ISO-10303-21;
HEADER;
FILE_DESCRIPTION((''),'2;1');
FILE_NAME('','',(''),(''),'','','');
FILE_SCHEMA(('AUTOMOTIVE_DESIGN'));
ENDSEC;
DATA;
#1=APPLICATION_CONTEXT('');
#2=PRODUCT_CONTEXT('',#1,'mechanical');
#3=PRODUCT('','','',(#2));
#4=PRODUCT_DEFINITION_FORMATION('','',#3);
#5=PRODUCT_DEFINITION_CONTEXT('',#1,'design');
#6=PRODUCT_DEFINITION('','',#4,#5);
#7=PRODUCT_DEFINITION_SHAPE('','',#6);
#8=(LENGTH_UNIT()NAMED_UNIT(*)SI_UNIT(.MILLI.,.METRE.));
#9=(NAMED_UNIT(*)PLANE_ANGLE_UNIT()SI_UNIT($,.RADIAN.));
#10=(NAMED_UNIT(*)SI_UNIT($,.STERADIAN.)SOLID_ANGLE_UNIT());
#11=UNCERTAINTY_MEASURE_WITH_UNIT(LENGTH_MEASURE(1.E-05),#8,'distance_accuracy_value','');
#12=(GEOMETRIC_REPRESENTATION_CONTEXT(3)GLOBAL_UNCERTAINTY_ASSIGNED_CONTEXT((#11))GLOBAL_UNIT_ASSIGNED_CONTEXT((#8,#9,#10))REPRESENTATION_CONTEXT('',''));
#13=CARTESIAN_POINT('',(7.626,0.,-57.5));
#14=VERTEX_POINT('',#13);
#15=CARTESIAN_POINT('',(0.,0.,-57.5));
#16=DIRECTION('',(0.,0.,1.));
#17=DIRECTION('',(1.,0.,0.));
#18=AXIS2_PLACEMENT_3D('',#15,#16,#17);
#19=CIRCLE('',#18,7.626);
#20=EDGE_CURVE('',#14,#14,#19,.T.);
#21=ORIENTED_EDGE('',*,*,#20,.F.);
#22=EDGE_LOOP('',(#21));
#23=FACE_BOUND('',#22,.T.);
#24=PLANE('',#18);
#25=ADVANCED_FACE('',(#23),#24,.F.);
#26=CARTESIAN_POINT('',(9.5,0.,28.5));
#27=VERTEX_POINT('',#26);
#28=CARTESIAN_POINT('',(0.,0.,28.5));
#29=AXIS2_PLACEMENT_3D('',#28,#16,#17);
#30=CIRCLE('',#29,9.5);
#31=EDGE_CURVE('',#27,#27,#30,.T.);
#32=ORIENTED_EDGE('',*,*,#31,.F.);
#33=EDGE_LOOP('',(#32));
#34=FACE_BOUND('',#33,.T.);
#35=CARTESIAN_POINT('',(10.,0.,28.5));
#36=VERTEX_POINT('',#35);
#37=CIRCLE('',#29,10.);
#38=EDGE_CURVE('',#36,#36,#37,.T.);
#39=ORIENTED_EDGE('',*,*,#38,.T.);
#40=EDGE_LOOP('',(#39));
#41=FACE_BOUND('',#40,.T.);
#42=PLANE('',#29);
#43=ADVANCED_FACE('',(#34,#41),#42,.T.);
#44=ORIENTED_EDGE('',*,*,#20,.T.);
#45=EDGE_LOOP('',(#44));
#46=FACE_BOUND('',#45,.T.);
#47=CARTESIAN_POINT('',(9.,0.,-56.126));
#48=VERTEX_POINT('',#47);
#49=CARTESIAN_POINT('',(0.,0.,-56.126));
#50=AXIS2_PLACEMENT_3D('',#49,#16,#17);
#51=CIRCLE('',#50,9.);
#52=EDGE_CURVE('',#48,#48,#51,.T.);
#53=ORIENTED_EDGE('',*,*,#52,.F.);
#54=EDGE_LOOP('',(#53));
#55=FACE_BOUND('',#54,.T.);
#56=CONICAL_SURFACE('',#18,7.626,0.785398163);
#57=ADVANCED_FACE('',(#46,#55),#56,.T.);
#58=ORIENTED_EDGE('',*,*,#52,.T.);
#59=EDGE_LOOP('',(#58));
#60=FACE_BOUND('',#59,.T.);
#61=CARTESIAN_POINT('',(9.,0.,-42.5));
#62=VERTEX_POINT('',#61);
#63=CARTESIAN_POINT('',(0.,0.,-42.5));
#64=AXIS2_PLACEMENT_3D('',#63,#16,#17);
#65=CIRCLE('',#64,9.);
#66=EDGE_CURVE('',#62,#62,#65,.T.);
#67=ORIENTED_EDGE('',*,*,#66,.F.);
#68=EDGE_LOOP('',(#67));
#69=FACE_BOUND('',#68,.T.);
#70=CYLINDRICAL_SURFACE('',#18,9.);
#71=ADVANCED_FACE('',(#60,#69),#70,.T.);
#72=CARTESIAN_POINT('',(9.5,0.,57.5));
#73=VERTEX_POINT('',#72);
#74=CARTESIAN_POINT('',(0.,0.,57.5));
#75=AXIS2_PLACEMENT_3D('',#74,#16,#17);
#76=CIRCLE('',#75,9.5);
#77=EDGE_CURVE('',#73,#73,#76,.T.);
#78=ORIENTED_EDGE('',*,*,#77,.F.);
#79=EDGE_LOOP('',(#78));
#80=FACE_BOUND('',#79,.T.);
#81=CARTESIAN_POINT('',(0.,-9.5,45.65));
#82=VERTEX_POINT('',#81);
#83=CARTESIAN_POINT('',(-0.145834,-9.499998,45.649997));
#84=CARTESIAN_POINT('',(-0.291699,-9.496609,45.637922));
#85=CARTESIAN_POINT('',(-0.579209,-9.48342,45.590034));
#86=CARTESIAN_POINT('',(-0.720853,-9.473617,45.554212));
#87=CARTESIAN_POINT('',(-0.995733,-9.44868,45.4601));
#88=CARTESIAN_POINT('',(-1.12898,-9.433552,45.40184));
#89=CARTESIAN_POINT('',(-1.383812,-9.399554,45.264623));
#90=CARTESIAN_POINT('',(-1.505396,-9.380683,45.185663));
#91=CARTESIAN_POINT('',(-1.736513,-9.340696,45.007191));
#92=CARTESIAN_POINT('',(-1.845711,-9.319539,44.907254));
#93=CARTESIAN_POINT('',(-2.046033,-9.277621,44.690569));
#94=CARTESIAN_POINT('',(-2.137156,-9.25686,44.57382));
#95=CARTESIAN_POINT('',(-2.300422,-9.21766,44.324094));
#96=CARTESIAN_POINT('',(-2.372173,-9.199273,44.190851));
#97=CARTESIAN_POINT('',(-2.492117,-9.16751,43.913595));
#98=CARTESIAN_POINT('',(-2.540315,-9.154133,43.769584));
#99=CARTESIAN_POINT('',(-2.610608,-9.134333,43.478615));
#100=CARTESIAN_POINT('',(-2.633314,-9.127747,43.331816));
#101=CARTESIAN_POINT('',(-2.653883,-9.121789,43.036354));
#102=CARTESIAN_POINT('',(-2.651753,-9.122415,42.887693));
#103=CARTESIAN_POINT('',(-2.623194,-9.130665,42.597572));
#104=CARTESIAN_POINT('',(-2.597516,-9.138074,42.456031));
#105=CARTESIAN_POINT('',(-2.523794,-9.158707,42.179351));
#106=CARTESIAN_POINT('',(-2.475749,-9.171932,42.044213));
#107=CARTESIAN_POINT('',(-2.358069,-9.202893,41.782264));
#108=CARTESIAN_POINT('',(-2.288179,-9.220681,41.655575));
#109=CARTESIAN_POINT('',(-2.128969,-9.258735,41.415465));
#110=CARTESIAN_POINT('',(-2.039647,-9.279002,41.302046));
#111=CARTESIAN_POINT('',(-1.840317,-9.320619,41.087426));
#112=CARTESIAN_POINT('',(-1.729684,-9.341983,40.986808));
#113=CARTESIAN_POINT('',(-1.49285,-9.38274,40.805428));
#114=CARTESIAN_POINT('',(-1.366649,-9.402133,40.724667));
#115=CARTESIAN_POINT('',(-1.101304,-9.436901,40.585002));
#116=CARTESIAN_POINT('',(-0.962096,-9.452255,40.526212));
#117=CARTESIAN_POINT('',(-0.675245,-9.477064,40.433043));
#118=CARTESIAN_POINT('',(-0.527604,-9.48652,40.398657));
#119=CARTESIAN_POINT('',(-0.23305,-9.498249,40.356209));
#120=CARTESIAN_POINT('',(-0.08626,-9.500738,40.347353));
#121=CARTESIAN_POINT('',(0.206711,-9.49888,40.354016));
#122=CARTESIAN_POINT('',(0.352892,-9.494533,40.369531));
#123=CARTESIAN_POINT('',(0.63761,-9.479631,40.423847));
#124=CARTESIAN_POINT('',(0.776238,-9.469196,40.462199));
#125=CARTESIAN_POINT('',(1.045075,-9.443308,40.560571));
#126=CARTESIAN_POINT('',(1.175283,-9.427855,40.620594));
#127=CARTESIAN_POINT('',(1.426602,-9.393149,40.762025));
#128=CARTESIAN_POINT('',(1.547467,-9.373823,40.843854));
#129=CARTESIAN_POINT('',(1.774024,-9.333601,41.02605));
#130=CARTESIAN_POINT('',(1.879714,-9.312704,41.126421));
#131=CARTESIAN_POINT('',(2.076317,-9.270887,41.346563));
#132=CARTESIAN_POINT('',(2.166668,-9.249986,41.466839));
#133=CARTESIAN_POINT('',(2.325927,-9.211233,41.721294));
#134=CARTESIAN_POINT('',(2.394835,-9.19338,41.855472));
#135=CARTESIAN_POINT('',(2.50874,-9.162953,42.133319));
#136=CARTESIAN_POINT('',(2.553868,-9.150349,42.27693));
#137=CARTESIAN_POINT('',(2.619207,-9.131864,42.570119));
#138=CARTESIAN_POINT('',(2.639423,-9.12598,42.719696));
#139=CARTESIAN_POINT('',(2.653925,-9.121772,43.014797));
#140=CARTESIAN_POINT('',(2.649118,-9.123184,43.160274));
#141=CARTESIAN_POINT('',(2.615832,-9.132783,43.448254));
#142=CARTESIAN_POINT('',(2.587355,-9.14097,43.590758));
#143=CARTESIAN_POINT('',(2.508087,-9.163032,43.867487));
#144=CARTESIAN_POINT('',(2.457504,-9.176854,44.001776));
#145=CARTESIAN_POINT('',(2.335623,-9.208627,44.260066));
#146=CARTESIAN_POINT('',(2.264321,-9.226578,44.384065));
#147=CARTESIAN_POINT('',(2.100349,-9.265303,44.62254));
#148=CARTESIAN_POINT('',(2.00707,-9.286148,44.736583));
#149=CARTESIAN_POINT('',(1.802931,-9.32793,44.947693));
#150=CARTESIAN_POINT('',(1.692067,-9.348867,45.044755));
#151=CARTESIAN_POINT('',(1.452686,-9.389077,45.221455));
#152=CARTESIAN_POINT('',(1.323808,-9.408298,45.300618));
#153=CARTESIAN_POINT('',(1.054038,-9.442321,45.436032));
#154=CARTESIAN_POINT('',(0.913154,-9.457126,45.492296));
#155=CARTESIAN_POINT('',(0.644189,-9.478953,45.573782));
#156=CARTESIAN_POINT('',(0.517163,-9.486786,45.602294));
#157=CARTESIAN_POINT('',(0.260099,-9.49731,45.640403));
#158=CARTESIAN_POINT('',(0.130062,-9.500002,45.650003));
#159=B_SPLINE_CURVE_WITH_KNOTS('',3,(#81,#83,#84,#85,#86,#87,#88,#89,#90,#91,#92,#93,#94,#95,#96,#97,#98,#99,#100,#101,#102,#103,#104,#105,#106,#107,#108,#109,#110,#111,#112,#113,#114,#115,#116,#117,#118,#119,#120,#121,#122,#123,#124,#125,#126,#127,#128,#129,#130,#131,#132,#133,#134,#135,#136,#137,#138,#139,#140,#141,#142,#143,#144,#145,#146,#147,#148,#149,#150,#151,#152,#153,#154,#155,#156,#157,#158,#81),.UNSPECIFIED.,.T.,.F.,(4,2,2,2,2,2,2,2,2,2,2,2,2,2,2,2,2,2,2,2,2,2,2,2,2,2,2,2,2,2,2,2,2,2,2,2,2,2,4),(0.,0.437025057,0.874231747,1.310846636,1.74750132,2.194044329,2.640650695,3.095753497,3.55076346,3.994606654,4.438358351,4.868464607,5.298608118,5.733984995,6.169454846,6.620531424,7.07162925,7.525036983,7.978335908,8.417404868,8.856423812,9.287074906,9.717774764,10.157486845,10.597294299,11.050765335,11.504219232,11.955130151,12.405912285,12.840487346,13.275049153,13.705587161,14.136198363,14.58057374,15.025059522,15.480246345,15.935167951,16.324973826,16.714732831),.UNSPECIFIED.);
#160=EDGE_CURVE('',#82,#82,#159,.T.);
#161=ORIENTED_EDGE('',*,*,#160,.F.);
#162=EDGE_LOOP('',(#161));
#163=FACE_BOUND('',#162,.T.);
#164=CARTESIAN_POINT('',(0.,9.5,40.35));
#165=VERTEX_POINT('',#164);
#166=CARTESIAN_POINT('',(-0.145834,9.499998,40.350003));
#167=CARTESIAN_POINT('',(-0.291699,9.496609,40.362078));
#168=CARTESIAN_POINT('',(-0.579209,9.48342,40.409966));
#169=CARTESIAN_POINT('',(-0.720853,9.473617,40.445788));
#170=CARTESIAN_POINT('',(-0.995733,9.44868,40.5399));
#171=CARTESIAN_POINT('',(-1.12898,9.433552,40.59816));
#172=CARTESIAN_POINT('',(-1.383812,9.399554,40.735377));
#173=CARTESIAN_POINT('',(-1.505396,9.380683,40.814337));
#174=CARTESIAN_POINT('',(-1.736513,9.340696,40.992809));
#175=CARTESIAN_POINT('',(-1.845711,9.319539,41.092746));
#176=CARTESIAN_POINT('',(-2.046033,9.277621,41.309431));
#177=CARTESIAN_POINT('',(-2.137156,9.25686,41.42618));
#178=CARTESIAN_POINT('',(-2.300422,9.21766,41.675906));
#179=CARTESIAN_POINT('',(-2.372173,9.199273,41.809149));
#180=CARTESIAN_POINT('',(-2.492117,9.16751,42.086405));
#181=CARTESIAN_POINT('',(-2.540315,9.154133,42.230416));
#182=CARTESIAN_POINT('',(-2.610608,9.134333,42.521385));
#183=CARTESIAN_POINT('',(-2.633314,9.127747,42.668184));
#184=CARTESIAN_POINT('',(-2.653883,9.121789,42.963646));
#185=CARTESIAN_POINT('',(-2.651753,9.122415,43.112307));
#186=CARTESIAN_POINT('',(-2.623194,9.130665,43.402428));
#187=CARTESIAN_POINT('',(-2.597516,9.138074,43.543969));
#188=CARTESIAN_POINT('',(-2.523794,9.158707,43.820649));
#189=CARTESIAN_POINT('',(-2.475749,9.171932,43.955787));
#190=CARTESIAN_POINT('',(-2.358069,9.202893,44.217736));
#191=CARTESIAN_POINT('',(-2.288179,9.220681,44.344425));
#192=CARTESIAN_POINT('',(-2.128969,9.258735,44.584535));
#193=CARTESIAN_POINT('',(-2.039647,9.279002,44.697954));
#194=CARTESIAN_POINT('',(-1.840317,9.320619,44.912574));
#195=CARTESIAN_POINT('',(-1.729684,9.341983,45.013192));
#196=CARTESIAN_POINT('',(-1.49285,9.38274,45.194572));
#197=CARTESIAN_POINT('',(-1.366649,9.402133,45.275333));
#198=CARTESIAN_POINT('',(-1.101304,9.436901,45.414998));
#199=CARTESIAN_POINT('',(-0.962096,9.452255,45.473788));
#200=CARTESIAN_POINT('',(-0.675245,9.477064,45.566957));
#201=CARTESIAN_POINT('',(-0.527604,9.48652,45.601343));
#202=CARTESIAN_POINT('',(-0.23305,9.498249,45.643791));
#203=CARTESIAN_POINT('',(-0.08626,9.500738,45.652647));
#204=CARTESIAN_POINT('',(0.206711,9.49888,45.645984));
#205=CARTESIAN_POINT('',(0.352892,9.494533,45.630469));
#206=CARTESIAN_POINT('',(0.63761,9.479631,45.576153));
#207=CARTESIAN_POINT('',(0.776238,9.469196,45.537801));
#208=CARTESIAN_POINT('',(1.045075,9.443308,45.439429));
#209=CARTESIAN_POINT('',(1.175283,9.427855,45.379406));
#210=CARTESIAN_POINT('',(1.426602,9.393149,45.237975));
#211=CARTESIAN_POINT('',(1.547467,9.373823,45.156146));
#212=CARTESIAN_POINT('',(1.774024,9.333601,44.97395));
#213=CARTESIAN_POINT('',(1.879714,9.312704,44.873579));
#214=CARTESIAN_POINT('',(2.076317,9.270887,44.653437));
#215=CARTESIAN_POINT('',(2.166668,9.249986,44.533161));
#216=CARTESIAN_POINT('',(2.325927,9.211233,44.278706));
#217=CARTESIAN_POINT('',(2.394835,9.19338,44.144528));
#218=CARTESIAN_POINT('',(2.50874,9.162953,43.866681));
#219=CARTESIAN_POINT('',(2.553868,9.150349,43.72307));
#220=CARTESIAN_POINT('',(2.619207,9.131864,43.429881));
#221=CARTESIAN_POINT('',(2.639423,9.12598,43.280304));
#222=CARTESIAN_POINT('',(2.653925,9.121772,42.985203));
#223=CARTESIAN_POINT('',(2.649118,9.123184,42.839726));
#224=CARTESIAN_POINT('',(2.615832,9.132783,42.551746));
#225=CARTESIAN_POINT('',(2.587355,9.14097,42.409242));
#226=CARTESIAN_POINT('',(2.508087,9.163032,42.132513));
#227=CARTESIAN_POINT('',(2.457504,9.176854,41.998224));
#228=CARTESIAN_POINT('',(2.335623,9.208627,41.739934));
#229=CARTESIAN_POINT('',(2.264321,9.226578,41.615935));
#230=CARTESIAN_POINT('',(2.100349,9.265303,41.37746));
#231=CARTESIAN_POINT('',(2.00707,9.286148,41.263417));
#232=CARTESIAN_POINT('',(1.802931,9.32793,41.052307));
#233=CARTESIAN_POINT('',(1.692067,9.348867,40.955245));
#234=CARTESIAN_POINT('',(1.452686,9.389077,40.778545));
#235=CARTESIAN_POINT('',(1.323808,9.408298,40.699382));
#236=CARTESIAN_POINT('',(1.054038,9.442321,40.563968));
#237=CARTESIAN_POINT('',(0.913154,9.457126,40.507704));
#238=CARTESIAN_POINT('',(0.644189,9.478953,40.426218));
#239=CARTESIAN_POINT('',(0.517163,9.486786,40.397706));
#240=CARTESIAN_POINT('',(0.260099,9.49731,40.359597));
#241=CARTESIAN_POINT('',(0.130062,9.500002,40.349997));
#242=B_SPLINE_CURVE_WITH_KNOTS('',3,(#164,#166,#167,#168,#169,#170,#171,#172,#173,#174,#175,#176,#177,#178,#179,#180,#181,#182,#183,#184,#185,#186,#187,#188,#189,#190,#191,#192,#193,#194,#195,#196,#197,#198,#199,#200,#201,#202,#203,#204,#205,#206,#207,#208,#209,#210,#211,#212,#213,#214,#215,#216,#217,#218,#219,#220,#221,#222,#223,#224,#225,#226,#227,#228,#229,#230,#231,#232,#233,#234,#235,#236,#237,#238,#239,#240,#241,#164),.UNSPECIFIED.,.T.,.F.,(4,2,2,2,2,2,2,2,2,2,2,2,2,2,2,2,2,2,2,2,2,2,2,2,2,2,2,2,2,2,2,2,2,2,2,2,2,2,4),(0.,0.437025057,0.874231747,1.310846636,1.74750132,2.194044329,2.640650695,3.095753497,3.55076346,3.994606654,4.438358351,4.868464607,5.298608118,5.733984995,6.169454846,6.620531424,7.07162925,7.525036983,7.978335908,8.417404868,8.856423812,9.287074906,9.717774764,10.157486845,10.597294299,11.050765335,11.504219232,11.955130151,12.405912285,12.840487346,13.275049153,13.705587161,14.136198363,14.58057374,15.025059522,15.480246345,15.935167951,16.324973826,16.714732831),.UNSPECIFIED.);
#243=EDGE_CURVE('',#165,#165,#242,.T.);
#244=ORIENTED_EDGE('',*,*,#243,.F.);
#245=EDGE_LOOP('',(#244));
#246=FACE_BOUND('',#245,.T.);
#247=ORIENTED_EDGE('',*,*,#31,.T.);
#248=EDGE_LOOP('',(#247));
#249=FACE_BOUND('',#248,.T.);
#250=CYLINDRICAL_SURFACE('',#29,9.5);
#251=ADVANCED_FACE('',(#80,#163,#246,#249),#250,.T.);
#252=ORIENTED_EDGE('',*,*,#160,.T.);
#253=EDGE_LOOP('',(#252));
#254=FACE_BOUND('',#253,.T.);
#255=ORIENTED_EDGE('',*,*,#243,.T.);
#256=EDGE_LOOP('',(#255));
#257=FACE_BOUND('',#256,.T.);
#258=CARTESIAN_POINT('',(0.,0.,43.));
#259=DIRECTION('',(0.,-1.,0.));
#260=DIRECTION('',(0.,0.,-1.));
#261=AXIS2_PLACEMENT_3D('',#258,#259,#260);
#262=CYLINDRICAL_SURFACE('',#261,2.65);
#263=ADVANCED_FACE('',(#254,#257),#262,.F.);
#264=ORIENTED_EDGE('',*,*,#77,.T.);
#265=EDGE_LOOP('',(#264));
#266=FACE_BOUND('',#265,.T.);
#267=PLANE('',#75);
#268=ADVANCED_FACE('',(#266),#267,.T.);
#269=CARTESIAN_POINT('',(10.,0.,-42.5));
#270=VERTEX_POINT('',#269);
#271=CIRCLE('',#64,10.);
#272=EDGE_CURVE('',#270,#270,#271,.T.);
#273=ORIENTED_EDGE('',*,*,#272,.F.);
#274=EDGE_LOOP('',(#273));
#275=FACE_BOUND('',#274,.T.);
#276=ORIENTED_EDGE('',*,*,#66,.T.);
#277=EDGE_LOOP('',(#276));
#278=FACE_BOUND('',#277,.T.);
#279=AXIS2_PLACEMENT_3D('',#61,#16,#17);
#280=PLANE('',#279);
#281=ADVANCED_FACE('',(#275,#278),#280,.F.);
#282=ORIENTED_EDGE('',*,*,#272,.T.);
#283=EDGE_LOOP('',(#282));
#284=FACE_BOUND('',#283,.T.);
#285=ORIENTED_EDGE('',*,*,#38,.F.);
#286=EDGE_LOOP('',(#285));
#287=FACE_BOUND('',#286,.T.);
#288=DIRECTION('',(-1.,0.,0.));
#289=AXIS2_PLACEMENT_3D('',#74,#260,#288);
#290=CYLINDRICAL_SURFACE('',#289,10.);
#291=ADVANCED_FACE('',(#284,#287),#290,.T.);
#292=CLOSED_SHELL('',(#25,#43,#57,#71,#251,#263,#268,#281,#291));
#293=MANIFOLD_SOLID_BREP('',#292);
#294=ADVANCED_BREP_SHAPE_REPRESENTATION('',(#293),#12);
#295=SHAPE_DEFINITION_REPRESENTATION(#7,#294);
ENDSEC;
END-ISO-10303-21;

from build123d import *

# Parameters (mm, degrees)
SKETCH1_R           = 10
BOSS_EXTRUDE1_DEPTH = 57.5
SKETCH7_R           = 10
SKETCH7_R_2         = 9.5
CUT_EXTRUDE1_DEPTH  = 29
SKETCH10_W          = 2.65
SKETCH10_H          = 10


# Read off the part's stored shape, not the designer's step: M18x2.5 Machine Threads Stud1
with BuildPart() as part:
    # Sketch1 → Boss-Extrude1 (new, symmetric)
    with BuildSketch(Plane.XY):
        Circle(SKETCH1_R)
    extrude(amount=BOSS_EXTRUDE1_DEPTH, both=True)

    # M18x2.5 Machine Threads Stud1 outline → M18x2.5 Machine Threads Stud1 (revolve, cut)
    with BuildSketch(Plane.XZ):
        Polygon((7.626, -57.5), (10, -57.5), (10, -42.5), (9, -42.5), (9, -56.126), align=None)
    revolve(axis=Axis((0, 0, 0), (0, 0, 1)), mode=Mode.SUBTRACT)

    # Sketch7 → Cut-Extrude1 (cut)
    with BuildSketch(Plane.XY.offset(57.5)):
        Circle(SKETCH7_R)
        Circle(SKETCH7_R_2, mode=Mode.SUBTRACT)
    extrude(amount=-CUT_EXTRUDE1_DEPTH, mode=Mode.SUBTRACT)

    # Sketch10 → M5 Clearance Hole1 (revolve, cut)
    with BuildSketch(Plane(origin=(0, 0, 43), x_dir=(0, 0, -1), z_dir=(1, 0, 0))):
        with Locations((1.325, 5)):
            Rectangle(SKETCH10_W, SKETCH10_H)
    m5_clearance_hole1 = revolve(axis=Axis((0, -6.35, 43), (0, 1, 0)), mode=Mode.SUBTRACT)

    # Mirror2: M5 Clearance Hole1 across plane
    add(m5_clearance_hole1.mirror(Plane.ZX), mode=Mode.SUBTRACT)


solid = part.part
